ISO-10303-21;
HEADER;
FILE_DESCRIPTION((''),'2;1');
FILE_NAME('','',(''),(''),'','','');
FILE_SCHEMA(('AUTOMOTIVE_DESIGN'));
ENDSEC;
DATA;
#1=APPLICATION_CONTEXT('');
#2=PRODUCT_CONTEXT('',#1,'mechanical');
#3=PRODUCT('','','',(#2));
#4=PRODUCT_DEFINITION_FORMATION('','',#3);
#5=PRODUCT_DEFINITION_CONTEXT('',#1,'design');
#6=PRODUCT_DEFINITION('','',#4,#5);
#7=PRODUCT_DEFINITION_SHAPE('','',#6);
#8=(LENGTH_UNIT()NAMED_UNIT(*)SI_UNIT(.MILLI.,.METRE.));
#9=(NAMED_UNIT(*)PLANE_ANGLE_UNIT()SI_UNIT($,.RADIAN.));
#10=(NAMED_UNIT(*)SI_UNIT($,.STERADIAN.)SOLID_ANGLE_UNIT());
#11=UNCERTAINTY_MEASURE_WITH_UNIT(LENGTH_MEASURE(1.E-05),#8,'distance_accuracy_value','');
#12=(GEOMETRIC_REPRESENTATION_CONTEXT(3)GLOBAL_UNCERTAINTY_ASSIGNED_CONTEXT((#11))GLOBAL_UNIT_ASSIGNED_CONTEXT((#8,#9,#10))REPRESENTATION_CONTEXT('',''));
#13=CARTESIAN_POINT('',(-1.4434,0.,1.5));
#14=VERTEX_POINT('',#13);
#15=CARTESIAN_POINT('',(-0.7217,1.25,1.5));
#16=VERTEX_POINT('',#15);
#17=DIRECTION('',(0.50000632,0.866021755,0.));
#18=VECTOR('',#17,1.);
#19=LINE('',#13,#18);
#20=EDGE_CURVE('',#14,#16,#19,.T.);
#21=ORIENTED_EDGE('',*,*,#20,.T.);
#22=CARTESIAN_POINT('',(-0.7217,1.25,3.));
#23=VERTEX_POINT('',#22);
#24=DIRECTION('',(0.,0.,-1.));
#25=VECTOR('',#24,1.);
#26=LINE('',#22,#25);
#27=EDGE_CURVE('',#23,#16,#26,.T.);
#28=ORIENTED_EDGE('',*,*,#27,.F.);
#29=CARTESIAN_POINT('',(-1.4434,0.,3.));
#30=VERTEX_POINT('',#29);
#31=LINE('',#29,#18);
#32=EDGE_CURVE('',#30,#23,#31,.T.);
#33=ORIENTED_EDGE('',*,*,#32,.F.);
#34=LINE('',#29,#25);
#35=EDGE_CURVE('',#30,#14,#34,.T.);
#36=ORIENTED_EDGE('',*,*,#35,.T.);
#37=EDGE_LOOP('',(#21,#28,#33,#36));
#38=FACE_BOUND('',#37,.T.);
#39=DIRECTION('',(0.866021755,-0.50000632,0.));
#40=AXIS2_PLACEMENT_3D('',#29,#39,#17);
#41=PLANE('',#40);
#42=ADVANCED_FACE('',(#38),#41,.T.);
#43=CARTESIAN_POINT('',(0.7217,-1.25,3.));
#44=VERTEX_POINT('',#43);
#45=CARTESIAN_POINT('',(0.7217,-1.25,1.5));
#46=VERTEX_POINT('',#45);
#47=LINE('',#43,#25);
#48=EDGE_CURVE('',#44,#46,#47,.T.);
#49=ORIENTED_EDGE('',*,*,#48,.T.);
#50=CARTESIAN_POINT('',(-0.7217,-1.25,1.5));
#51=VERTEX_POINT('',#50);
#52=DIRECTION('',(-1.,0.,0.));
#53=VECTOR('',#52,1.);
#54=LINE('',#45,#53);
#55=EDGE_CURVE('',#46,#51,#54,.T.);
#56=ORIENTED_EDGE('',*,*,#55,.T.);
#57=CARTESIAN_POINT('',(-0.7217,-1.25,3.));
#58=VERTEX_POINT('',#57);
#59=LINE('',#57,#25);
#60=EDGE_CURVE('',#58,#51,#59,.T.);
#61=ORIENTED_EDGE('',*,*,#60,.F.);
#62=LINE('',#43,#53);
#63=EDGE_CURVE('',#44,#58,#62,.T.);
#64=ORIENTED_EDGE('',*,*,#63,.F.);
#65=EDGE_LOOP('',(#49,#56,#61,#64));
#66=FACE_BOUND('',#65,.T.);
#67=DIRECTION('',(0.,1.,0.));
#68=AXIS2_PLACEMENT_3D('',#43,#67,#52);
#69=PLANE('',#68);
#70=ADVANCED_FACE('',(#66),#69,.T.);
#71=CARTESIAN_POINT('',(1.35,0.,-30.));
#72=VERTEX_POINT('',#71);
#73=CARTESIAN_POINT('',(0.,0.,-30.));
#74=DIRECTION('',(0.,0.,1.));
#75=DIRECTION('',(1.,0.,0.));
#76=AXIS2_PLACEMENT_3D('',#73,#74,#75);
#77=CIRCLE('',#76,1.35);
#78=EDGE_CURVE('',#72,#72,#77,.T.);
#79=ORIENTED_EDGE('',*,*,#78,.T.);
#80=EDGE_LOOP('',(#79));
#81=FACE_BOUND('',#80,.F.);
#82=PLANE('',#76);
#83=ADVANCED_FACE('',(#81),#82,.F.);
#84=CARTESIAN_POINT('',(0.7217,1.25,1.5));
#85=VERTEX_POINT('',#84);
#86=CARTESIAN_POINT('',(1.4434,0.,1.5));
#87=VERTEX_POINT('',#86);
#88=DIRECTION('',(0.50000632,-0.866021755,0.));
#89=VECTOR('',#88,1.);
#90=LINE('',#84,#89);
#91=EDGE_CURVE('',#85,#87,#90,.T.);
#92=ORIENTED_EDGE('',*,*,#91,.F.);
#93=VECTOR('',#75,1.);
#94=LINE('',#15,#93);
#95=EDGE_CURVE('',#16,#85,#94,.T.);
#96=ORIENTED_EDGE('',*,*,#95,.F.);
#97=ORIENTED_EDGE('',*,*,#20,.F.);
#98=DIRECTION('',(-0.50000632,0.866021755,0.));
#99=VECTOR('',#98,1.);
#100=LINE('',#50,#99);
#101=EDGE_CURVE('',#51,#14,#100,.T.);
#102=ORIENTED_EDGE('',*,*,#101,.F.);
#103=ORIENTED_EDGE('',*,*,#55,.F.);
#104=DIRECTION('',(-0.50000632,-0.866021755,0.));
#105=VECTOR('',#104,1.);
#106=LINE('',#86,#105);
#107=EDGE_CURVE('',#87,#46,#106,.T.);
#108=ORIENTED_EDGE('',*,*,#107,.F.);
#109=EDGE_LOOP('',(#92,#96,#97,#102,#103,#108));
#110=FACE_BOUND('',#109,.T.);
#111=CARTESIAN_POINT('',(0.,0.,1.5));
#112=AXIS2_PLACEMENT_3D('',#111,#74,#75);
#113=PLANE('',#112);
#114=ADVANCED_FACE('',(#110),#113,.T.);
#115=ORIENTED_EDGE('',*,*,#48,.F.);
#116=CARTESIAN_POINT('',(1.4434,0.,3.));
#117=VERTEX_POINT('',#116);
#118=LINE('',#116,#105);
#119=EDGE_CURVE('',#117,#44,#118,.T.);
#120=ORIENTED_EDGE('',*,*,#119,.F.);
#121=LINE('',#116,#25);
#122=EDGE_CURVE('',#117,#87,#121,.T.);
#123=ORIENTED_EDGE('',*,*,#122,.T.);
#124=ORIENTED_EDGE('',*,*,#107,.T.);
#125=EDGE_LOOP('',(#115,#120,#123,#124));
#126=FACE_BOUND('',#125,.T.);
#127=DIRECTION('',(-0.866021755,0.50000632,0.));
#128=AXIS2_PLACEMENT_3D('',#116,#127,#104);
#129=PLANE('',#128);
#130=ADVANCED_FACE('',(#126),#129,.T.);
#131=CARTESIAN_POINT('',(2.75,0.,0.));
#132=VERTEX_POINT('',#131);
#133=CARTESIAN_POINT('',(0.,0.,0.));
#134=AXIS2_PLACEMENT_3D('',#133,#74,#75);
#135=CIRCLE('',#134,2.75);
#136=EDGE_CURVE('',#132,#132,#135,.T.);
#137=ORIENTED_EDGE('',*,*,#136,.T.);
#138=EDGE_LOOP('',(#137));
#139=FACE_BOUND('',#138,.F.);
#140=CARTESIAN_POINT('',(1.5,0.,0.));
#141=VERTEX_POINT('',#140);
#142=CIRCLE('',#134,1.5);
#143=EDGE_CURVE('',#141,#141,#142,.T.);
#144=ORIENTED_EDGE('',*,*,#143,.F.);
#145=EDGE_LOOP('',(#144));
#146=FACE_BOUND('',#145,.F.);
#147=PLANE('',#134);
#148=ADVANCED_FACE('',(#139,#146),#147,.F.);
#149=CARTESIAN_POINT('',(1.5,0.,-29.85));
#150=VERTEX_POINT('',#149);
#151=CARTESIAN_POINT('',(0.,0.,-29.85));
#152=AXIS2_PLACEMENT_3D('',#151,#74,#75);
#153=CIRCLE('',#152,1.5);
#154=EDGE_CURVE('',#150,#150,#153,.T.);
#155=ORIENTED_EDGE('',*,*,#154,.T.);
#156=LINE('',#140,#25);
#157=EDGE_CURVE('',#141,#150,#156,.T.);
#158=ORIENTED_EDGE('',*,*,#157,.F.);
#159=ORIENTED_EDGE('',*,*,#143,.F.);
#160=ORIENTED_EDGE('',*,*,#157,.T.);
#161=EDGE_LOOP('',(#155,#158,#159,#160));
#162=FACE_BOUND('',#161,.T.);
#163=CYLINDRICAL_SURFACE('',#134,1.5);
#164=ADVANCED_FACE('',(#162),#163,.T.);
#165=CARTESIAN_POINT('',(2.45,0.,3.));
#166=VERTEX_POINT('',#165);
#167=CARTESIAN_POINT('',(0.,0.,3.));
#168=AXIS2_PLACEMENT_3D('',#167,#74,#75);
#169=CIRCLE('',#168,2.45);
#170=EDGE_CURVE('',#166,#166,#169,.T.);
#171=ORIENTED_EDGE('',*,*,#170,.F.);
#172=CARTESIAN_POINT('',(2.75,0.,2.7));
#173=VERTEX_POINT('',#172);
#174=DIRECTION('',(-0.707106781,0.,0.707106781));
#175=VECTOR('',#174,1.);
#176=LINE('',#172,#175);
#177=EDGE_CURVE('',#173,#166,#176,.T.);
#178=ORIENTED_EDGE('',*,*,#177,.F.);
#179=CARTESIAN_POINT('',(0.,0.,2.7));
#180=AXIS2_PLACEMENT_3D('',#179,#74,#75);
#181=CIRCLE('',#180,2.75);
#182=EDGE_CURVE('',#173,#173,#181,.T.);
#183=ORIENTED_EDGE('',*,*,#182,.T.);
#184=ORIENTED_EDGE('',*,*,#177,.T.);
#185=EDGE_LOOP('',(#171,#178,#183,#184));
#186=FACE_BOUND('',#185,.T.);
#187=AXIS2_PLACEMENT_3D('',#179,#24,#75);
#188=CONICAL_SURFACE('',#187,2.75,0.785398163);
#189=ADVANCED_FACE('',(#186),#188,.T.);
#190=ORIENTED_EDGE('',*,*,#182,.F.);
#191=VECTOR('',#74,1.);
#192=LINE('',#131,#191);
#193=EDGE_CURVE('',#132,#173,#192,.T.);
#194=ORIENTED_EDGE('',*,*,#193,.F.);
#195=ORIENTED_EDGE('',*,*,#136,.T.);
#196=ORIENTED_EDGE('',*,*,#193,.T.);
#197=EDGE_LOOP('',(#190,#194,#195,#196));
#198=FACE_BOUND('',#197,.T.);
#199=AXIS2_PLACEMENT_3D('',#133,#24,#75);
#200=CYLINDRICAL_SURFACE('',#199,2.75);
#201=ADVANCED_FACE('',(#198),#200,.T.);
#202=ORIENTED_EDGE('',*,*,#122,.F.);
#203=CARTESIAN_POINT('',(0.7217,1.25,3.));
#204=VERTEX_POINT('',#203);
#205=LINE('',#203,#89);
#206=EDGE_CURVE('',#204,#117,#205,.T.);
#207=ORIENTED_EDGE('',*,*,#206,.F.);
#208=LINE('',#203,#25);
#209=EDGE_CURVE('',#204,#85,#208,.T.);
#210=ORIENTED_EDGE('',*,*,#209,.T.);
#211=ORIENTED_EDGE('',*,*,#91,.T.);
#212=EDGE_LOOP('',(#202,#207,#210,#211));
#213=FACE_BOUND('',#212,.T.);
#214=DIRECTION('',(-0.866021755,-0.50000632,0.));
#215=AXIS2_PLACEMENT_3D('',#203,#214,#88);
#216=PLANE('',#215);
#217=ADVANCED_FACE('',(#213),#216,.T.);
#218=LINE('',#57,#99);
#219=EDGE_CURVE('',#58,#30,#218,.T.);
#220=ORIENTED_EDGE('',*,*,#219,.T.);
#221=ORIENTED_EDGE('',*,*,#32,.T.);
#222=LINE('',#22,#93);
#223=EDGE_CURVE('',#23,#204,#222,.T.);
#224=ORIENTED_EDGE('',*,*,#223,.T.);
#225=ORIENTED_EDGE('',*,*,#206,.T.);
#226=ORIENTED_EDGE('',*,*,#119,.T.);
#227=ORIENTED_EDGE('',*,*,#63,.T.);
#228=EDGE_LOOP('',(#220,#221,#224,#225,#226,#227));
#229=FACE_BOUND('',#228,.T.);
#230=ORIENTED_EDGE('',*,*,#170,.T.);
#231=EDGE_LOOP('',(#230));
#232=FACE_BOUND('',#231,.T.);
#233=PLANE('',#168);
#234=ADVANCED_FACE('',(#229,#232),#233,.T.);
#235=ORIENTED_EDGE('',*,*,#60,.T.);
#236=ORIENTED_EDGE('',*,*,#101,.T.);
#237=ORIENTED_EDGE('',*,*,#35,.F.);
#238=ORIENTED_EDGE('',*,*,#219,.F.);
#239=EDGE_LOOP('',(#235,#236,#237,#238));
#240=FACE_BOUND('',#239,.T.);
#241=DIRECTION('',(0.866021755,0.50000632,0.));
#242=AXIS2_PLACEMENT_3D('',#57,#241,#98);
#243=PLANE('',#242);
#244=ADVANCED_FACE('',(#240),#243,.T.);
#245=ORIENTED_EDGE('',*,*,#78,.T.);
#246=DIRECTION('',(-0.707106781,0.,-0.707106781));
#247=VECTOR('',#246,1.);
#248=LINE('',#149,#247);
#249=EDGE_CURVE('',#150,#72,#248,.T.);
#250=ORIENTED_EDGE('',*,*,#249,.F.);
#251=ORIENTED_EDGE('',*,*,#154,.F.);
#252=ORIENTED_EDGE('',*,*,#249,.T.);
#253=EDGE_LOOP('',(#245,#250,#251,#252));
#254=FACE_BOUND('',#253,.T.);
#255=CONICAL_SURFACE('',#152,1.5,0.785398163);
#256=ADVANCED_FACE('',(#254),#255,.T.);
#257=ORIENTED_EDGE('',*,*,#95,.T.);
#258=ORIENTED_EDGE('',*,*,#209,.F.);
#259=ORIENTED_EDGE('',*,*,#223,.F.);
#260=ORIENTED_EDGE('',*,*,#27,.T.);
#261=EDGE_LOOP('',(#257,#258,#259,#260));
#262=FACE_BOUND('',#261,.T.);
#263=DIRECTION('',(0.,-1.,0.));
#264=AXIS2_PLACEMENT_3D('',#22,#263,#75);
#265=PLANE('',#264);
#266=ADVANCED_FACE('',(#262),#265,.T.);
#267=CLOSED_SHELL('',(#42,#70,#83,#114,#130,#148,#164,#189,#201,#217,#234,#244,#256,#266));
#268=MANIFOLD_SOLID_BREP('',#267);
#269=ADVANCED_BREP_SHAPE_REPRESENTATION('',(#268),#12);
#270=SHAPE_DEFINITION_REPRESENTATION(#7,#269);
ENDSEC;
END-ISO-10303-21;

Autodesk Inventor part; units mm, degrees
ref_plane "YZ Plane" through (0, 0, 0) normal (1, 0, 0) x (0, 1, 0)
ref_plane "XZ Plane" through (0, 0, 0) normal (0, 1, 0) x (-1, 0, 0)
ref_plane "XY Plane" through (0, 0, 0) normal (0, 0, 1) x (1, 0, 0)
sketch "Sketch3" plane through (0, 0, 0) normal (0, 0, 1) x (1, 0, 0)
  circle A0 centre (0, 0) radius 1.5
  dimension "Diameter" = 3
extrude "Extrusion1" add sketch "Sketch3" against normal blind 30
sketch "Sketch4" plane through (0, 0, 0) normal (0, 0, 1) x (1, 0, 0)
  circle A0 centre (0, 0) radius 1.5 projected
  circle A1 centre (0, 0) radius 2.75
  dimension "Head_Diameter" = 5.5
extrude "Extrusion2" add sketch "Sketch4" along normal blind 3 contours A0 | A1
sketch "Sketch5" plane through (0, 0, 3) normal (0, 0, 1) x (1, 0, 0)
  circle A0 centre (0, 0) radius 2.75 projected
  line L0 (1.4434, 0) -> (0.7217, -1.25)
  line L1 (0.7217, -1.25) -> (-0.7217, -1.25)
  line L2 (-0.7217, -1.25) -> (-1.4434, 0)
  line L3 (-1.4434, 0) -> (-0.7217, 1.25)
  line L4 (-0.7217, 1.25) -> (0.7217, 1.25)
  line L5 (0.7217, 1.25) -> (1.4434, 0)
  line L6 (0, 0) -> (1.4434, 0) construction
  dimension "Hex_Width" = 2.5
extrude "Extrusion3" cut sketch "Sketch5" against normal blind 1.5 contours L0 L1 L2 L3 L4 L5
thread "Thread1" size "M3x0.5" class "4g6g" standard "ANSI Metric M Profile" length 25
chamfer "Chamfer1" distance 0.3 angle 45 1 edges at (-2.75, 0, 3)
chamfer "Chamfer2" distance 0.15 angle 45 1 edges at (-1.5, 0, -30)
equation "\"d14\" = 0.5 * Chamfer"
equation "\"Chamfer\" = 0.3"
properties part number "SCREW,SOCKET-HD,P,12_9,M03X0_5X30MM" material "Steel, MS"
